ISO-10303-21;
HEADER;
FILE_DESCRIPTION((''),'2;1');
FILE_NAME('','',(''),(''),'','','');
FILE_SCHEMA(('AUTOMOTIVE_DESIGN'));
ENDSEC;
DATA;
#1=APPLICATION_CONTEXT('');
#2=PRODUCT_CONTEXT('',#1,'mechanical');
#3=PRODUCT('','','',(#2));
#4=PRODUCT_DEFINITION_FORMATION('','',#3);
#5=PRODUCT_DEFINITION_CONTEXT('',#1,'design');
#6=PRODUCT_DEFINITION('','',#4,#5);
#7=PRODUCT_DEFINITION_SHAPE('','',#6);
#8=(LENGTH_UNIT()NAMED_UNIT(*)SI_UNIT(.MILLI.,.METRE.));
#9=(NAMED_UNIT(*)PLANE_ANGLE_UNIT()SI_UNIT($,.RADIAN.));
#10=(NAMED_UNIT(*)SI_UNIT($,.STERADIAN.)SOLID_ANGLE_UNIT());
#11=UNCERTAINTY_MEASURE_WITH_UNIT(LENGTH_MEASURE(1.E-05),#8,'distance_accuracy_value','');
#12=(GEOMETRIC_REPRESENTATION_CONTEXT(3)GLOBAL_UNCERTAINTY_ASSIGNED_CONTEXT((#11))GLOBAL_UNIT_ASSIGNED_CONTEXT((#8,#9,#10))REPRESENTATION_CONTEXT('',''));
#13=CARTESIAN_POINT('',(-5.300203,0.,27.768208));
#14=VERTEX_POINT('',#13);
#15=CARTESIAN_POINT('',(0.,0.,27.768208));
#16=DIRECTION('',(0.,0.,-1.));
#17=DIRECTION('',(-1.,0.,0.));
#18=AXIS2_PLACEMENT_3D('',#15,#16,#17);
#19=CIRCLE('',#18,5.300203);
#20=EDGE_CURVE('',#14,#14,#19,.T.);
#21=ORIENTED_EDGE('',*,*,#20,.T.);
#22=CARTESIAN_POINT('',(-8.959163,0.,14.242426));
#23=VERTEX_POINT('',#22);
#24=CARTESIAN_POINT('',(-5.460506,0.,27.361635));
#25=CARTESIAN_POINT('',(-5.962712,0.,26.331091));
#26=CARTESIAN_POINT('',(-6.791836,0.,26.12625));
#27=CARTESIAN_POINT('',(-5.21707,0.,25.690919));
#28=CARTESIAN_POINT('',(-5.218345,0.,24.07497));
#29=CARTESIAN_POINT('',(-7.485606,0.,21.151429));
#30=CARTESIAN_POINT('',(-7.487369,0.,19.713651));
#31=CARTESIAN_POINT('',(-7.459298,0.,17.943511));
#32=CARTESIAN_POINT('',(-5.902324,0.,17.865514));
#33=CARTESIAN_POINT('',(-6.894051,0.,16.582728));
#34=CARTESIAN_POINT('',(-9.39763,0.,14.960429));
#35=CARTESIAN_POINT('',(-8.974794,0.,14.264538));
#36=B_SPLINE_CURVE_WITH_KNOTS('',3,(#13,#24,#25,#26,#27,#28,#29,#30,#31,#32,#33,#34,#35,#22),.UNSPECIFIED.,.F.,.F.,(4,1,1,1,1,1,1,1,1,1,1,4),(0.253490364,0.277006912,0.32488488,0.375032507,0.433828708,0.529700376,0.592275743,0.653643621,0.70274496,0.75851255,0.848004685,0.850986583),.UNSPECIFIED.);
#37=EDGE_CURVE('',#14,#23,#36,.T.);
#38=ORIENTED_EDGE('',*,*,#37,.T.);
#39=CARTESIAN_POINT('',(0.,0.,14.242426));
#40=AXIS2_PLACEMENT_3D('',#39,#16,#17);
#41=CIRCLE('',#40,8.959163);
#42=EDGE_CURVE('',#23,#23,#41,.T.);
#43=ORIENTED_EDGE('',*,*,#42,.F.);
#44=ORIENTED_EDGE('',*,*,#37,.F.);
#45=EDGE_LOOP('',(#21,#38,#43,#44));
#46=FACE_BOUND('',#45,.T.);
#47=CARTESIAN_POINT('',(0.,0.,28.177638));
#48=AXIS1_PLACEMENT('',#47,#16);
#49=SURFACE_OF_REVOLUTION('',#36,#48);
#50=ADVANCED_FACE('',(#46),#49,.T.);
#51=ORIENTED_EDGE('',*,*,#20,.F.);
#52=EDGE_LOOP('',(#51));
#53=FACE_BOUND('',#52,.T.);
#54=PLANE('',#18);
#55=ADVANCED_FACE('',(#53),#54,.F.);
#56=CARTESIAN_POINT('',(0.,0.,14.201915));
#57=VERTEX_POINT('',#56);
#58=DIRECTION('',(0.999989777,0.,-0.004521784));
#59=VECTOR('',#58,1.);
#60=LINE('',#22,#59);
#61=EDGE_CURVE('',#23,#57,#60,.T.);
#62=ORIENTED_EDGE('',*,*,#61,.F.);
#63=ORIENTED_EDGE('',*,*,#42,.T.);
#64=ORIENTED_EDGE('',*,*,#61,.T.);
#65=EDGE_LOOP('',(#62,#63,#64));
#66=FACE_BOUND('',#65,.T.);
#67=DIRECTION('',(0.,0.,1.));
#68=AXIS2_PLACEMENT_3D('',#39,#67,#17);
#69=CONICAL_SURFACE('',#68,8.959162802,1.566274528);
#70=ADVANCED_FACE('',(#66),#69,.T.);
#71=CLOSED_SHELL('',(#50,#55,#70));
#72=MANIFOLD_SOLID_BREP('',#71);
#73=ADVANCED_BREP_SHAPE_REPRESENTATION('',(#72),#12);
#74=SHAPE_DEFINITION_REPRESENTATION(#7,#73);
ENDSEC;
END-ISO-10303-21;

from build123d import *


with BuildPart() as f2:
    # F0 (on Front) → F2 (revolve)
    with BuildSketch(Plane.XZ):
        with BuildLine():
            Line((0, 27.7682077042), (-5.3002026468, 27.7682077042))
            add(Edge.make_bspline(
                [(-5.3002026468, 27.7682077042), (-5.4605062478, 27.3616354465), (-5.9627121178, 26.3310907989), (-6.7918361778, 26.1262496351), (-5.2170696756, 25.6909190192), (-5.2183445861, 24.0749700794), (-7.4856064998, 21.1514288504), (-7.4873686315, 19.7136508406), (-7.4592975783, 17.9435108088), (-5.9023238156, 17.8655136182), (-6.89405113, 16.5827279586), (-9.3976303075, 14.9604288728), (-8.9747941843, 14.2645384553), (-8.9591628024, 14.24242636)],
                knots=[0.253490364, 0.253490364, 0.253490364, 0.253490364, 0.2770069123, 0.3248848799, 0.3750325074, 0.4338287084, 0.529700376, 0.5922757431, 0.6536436214, 0.7027449596, 0.7585125505, 0.8480046848, 0.8509865829, 0.8509865829, 0.8509865829, 0.8509865829], degree=3))
            Line((-8.9591628024, 14.24242636), (0, 14.2019145489))
            Line((0, 14.2019145489), (0, 26.5156850219))
            Line((0, 26.5156850219), (0, 27.7682077042))
        make_face()
    revolve(axis=Axis((0, 0, 28.1776376069), (0, 0, -1)))


solid = f2.part
